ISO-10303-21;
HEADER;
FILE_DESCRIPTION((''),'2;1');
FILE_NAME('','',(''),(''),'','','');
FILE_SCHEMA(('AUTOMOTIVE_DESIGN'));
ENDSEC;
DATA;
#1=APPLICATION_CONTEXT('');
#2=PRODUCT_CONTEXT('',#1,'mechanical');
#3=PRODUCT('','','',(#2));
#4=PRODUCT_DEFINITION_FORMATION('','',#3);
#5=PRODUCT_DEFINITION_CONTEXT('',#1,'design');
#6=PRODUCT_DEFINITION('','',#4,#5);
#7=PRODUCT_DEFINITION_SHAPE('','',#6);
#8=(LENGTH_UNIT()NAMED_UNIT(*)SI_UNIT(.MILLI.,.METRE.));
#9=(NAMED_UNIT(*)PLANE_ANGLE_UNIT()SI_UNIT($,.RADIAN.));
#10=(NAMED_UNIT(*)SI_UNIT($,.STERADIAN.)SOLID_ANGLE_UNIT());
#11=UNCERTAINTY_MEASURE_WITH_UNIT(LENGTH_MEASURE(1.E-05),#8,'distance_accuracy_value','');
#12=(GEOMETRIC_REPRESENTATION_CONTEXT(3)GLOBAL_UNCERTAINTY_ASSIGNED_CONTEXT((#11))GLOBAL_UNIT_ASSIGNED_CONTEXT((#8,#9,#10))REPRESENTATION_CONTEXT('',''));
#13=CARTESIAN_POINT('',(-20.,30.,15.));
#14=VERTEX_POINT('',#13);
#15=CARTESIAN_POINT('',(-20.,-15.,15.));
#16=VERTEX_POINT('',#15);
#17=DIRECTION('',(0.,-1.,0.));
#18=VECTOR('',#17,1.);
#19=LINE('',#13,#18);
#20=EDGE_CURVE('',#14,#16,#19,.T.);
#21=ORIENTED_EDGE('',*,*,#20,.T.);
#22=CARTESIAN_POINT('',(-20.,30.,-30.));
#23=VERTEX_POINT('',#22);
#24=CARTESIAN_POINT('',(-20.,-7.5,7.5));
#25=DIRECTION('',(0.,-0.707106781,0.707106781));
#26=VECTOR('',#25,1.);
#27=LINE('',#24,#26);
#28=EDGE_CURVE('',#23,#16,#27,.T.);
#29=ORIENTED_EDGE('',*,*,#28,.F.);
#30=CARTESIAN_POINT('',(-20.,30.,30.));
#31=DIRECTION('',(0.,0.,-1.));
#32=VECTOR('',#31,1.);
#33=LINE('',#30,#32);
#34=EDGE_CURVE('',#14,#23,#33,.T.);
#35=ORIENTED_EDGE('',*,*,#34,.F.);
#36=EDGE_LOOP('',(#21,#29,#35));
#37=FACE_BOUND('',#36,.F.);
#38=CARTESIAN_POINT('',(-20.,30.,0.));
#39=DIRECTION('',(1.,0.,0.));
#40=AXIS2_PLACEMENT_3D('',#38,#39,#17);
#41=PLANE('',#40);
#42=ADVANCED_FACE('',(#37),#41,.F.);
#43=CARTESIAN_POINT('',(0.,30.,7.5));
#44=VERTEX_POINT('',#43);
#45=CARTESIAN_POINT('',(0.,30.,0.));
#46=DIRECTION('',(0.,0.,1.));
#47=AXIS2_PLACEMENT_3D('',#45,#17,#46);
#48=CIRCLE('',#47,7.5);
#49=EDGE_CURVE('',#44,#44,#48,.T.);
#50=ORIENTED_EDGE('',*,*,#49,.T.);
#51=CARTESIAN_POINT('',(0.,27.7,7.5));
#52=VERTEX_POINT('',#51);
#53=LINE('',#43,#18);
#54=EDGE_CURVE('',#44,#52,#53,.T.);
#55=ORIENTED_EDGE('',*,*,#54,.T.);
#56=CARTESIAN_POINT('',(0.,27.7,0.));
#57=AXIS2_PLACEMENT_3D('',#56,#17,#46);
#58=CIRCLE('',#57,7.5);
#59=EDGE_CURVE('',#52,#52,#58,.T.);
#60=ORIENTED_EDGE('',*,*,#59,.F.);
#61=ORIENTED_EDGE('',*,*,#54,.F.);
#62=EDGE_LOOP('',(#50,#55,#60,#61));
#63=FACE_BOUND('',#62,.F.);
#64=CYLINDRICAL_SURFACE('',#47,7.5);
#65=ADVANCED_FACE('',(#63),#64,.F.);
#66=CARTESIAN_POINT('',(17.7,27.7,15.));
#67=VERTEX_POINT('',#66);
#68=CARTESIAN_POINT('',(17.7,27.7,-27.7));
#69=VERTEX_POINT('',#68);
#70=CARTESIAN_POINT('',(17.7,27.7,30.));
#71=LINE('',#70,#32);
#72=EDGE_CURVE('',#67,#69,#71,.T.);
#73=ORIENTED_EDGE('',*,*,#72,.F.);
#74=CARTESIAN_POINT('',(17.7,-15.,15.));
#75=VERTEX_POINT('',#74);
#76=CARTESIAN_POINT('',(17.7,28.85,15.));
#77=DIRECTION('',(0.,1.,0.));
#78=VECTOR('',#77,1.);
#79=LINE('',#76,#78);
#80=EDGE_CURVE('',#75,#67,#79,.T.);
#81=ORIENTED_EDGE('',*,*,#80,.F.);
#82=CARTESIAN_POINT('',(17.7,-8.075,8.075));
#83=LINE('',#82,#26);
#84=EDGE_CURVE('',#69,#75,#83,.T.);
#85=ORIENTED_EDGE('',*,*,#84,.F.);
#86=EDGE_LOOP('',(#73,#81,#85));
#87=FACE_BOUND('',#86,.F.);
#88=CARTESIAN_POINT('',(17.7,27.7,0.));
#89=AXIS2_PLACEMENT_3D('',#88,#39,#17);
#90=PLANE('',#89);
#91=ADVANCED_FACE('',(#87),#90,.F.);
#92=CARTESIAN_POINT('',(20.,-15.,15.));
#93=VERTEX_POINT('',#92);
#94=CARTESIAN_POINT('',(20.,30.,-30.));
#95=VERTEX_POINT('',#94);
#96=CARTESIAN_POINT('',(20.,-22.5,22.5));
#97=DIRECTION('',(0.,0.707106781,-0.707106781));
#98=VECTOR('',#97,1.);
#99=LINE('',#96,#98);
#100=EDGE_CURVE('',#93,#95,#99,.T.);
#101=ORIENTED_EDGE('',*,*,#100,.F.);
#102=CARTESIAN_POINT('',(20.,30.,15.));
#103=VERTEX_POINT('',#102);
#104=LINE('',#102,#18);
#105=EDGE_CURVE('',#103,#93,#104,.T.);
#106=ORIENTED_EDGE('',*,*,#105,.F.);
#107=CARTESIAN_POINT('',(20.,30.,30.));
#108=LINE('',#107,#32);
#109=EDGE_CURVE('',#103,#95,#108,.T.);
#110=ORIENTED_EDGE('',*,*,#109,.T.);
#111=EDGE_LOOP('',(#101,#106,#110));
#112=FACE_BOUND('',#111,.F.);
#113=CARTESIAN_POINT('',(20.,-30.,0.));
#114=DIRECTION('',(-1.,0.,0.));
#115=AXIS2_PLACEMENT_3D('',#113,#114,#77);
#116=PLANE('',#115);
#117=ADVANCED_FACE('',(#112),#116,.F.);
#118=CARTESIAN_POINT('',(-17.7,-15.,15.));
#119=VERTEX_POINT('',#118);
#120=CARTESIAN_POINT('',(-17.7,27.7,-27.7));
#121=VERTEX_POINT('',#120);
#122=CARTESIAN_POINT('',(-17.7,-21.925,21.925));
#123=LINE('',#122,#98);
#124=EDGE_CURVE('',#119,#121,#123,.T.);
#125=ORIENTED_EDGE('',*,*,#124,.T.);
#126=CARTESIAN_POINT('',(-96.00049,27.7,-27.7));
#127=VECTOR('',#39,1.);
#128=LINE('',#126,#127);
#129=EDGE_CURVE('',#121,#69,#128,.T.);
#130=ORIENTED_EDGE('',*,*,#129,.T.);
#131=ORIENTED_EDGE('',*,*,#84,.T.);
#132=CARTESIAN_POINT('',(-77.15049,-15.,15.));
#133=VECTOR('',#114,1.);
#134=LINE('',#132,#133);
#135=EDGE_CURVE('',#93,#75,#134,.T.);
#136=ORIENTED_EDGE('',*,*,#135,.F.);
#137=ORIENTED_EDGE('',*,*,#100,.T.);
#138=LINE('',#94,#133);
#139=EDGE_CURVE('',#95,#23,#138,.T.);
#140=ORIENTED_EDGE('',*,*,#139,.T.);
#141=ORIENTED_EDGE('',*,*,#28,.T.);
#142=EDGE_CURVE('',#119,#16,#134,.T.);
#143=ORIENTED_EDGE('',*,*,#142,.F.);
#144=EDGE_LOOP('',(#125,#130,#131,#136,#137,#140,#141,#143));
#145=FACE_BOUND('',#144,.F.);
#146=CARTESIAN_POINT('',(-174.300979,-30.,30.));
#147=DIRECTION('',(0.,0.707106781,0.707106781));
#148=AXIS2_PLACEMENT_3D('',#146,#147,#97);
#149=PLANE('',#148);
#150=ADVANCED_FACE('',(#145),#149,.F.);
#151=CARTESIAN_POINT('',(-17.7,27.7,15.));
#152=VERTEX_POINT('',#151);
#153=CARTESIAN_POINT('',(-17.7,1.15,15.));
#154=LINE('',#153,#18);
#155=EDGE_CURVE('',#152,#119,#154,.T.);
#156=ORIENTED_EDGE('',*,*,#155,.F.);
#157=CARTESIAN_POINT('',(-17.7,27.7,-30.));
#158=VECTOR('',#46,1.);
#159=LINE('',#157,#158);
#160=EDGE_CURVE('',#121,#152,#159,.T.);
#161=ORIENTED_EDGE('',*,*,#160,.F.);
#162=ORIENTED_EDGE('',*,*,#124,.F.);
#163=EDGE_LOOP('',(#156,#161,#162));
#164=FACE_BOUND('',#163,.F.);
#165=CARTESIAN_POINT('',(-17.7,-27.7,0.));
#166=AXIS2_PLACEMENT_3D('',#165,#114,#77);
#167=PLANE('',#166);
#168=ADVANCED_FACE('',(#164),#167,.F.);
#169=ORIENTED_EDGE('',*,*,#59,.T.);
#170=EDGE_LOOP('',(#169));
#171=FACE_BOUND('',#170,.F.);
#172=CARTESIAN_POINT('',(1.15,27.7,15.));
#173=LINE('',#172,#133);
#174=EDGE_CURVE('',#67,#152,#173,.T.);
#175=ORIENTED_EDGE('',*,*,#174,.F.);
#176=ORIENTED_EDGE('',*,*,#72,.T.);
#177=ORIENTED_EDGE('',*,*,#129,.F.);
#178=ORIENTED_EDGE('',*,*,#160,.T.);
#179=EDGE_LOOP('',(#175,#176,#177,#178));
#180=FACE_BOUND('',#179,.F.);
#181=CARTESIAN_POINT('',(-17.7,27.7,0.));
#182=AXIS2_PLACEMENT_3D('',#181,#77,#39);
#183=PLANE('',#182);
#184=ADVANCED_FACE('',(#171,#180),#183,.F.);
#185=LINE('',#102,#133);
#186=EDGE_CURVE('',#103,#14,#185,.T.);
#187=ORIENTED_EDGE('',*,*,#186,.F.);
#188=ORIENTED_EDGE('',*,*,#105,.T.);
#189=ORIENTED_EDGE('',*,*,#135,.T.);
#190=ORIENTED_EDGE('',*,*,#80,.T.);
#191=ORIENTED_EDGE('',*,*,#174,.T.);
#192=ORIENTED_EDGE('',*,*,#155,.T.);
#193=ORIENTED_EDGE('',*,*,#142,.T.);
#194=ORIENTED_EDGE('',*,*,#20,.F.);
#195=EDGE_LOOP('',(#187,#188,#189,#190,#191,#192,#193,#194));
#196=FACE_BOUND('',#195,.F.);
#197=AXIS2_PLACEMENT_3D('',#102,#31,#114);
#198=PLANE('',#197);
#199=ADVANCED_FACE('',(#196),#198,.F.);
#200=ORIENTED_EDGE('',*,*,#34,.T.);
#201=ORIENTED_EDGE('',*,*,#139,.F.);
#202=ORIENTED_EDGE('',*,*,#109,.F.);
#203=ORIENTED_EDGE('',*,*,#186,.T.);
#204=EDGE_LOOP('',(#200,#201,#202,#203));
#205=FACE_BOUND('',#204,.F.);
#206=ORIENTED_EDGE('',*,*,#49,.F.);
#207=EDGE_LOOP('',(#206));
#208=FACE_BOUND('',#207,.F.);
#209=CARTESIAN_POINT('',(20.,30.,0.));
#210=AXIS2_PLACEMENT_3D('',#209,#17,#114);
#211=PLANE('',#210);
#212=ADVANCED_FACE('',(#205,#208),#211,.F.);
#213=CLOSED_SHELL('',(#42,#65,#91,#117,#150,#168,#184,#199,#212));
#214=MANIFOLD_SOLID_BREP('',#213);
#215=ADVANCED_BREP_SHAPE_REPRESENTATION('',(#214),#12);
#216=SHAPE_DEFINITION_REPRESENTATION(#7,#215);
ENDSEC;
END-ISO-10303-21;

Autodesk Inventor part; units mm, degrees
ref_plane "YZ Plane" through (0, 0, 0) normal (1, 0, 0) x (0, 1, 0)
ref_plane "XZ Plane" through (0, 0, 0) normal (0, 1, 0) x (-1, 0, 0)
ref_plane "XY Plane" through (0, 0, 0) normal (0, 0, 1) x (1, 0, 0)
sketch "スケッチ1" plane through (0, 0, 0) normal (0, 0, 1) x (1, 0, 0)
  line L0 (-20, -30) -> (20, -30)
  line L1 (20, -30) -> (20, 30)
  line L2 (20, 30) -> (-20, 30)
  line L3 (-20, 30) -> (-20, -30)
  line L4 (-20, -30) -> (20, 30) construction
  line L5 (20, -30) -> (-20, 30) construction
  line L6 (-17.7, 27.7) -> (17.7, 27.7)
  line L7 (17.7, 27.7) -> (17.7, -27.7)
  line L8 (17.7, -27.7) -> (-17.7, -27.7)
  line L9 (-17.7, -27.7) -> (-17.7, 27.7)
  point P0 (0, 0)
  dimension "d0" = 40
  dimension "d1" = 60
  dimension "d2" = 2.3
extrude "押し出し1" add sketch "スケッチ1" along normal mid plane 60
chamfer "面取り1" distance 60 angle 45 1 edges at (0, -30, -30)
sketch "スケッチ2" plane through (-20, 30, 30) normal (0, 1, 0) x (1, 0, 0)
  point P0 (20, 30)
  point P1 (20, 30)
hole "穴1" at (0, 30, 0) direction (0, -1, 0) diameter 15 depth 8 tip angle 118
sketch "スケッチ4" plane through (-20, 30, 30) normal (0, 1, 0) x (1, 0, 0)
  line L0 (0, 0) -> (40, 0)
  line L1 (40, 0) -> (40, 15)
  line L2 (40, 15) -> (0, 15)
  line L3 (0, 15) -> (0, 0)
  point P0 (20, 30)
  dimension "d15" = 40
  dimension "d16" = 15
extrude "押し出し2" cut sketch "スケッチ4" against normal blind 80
properties part number "車軸受け2"
